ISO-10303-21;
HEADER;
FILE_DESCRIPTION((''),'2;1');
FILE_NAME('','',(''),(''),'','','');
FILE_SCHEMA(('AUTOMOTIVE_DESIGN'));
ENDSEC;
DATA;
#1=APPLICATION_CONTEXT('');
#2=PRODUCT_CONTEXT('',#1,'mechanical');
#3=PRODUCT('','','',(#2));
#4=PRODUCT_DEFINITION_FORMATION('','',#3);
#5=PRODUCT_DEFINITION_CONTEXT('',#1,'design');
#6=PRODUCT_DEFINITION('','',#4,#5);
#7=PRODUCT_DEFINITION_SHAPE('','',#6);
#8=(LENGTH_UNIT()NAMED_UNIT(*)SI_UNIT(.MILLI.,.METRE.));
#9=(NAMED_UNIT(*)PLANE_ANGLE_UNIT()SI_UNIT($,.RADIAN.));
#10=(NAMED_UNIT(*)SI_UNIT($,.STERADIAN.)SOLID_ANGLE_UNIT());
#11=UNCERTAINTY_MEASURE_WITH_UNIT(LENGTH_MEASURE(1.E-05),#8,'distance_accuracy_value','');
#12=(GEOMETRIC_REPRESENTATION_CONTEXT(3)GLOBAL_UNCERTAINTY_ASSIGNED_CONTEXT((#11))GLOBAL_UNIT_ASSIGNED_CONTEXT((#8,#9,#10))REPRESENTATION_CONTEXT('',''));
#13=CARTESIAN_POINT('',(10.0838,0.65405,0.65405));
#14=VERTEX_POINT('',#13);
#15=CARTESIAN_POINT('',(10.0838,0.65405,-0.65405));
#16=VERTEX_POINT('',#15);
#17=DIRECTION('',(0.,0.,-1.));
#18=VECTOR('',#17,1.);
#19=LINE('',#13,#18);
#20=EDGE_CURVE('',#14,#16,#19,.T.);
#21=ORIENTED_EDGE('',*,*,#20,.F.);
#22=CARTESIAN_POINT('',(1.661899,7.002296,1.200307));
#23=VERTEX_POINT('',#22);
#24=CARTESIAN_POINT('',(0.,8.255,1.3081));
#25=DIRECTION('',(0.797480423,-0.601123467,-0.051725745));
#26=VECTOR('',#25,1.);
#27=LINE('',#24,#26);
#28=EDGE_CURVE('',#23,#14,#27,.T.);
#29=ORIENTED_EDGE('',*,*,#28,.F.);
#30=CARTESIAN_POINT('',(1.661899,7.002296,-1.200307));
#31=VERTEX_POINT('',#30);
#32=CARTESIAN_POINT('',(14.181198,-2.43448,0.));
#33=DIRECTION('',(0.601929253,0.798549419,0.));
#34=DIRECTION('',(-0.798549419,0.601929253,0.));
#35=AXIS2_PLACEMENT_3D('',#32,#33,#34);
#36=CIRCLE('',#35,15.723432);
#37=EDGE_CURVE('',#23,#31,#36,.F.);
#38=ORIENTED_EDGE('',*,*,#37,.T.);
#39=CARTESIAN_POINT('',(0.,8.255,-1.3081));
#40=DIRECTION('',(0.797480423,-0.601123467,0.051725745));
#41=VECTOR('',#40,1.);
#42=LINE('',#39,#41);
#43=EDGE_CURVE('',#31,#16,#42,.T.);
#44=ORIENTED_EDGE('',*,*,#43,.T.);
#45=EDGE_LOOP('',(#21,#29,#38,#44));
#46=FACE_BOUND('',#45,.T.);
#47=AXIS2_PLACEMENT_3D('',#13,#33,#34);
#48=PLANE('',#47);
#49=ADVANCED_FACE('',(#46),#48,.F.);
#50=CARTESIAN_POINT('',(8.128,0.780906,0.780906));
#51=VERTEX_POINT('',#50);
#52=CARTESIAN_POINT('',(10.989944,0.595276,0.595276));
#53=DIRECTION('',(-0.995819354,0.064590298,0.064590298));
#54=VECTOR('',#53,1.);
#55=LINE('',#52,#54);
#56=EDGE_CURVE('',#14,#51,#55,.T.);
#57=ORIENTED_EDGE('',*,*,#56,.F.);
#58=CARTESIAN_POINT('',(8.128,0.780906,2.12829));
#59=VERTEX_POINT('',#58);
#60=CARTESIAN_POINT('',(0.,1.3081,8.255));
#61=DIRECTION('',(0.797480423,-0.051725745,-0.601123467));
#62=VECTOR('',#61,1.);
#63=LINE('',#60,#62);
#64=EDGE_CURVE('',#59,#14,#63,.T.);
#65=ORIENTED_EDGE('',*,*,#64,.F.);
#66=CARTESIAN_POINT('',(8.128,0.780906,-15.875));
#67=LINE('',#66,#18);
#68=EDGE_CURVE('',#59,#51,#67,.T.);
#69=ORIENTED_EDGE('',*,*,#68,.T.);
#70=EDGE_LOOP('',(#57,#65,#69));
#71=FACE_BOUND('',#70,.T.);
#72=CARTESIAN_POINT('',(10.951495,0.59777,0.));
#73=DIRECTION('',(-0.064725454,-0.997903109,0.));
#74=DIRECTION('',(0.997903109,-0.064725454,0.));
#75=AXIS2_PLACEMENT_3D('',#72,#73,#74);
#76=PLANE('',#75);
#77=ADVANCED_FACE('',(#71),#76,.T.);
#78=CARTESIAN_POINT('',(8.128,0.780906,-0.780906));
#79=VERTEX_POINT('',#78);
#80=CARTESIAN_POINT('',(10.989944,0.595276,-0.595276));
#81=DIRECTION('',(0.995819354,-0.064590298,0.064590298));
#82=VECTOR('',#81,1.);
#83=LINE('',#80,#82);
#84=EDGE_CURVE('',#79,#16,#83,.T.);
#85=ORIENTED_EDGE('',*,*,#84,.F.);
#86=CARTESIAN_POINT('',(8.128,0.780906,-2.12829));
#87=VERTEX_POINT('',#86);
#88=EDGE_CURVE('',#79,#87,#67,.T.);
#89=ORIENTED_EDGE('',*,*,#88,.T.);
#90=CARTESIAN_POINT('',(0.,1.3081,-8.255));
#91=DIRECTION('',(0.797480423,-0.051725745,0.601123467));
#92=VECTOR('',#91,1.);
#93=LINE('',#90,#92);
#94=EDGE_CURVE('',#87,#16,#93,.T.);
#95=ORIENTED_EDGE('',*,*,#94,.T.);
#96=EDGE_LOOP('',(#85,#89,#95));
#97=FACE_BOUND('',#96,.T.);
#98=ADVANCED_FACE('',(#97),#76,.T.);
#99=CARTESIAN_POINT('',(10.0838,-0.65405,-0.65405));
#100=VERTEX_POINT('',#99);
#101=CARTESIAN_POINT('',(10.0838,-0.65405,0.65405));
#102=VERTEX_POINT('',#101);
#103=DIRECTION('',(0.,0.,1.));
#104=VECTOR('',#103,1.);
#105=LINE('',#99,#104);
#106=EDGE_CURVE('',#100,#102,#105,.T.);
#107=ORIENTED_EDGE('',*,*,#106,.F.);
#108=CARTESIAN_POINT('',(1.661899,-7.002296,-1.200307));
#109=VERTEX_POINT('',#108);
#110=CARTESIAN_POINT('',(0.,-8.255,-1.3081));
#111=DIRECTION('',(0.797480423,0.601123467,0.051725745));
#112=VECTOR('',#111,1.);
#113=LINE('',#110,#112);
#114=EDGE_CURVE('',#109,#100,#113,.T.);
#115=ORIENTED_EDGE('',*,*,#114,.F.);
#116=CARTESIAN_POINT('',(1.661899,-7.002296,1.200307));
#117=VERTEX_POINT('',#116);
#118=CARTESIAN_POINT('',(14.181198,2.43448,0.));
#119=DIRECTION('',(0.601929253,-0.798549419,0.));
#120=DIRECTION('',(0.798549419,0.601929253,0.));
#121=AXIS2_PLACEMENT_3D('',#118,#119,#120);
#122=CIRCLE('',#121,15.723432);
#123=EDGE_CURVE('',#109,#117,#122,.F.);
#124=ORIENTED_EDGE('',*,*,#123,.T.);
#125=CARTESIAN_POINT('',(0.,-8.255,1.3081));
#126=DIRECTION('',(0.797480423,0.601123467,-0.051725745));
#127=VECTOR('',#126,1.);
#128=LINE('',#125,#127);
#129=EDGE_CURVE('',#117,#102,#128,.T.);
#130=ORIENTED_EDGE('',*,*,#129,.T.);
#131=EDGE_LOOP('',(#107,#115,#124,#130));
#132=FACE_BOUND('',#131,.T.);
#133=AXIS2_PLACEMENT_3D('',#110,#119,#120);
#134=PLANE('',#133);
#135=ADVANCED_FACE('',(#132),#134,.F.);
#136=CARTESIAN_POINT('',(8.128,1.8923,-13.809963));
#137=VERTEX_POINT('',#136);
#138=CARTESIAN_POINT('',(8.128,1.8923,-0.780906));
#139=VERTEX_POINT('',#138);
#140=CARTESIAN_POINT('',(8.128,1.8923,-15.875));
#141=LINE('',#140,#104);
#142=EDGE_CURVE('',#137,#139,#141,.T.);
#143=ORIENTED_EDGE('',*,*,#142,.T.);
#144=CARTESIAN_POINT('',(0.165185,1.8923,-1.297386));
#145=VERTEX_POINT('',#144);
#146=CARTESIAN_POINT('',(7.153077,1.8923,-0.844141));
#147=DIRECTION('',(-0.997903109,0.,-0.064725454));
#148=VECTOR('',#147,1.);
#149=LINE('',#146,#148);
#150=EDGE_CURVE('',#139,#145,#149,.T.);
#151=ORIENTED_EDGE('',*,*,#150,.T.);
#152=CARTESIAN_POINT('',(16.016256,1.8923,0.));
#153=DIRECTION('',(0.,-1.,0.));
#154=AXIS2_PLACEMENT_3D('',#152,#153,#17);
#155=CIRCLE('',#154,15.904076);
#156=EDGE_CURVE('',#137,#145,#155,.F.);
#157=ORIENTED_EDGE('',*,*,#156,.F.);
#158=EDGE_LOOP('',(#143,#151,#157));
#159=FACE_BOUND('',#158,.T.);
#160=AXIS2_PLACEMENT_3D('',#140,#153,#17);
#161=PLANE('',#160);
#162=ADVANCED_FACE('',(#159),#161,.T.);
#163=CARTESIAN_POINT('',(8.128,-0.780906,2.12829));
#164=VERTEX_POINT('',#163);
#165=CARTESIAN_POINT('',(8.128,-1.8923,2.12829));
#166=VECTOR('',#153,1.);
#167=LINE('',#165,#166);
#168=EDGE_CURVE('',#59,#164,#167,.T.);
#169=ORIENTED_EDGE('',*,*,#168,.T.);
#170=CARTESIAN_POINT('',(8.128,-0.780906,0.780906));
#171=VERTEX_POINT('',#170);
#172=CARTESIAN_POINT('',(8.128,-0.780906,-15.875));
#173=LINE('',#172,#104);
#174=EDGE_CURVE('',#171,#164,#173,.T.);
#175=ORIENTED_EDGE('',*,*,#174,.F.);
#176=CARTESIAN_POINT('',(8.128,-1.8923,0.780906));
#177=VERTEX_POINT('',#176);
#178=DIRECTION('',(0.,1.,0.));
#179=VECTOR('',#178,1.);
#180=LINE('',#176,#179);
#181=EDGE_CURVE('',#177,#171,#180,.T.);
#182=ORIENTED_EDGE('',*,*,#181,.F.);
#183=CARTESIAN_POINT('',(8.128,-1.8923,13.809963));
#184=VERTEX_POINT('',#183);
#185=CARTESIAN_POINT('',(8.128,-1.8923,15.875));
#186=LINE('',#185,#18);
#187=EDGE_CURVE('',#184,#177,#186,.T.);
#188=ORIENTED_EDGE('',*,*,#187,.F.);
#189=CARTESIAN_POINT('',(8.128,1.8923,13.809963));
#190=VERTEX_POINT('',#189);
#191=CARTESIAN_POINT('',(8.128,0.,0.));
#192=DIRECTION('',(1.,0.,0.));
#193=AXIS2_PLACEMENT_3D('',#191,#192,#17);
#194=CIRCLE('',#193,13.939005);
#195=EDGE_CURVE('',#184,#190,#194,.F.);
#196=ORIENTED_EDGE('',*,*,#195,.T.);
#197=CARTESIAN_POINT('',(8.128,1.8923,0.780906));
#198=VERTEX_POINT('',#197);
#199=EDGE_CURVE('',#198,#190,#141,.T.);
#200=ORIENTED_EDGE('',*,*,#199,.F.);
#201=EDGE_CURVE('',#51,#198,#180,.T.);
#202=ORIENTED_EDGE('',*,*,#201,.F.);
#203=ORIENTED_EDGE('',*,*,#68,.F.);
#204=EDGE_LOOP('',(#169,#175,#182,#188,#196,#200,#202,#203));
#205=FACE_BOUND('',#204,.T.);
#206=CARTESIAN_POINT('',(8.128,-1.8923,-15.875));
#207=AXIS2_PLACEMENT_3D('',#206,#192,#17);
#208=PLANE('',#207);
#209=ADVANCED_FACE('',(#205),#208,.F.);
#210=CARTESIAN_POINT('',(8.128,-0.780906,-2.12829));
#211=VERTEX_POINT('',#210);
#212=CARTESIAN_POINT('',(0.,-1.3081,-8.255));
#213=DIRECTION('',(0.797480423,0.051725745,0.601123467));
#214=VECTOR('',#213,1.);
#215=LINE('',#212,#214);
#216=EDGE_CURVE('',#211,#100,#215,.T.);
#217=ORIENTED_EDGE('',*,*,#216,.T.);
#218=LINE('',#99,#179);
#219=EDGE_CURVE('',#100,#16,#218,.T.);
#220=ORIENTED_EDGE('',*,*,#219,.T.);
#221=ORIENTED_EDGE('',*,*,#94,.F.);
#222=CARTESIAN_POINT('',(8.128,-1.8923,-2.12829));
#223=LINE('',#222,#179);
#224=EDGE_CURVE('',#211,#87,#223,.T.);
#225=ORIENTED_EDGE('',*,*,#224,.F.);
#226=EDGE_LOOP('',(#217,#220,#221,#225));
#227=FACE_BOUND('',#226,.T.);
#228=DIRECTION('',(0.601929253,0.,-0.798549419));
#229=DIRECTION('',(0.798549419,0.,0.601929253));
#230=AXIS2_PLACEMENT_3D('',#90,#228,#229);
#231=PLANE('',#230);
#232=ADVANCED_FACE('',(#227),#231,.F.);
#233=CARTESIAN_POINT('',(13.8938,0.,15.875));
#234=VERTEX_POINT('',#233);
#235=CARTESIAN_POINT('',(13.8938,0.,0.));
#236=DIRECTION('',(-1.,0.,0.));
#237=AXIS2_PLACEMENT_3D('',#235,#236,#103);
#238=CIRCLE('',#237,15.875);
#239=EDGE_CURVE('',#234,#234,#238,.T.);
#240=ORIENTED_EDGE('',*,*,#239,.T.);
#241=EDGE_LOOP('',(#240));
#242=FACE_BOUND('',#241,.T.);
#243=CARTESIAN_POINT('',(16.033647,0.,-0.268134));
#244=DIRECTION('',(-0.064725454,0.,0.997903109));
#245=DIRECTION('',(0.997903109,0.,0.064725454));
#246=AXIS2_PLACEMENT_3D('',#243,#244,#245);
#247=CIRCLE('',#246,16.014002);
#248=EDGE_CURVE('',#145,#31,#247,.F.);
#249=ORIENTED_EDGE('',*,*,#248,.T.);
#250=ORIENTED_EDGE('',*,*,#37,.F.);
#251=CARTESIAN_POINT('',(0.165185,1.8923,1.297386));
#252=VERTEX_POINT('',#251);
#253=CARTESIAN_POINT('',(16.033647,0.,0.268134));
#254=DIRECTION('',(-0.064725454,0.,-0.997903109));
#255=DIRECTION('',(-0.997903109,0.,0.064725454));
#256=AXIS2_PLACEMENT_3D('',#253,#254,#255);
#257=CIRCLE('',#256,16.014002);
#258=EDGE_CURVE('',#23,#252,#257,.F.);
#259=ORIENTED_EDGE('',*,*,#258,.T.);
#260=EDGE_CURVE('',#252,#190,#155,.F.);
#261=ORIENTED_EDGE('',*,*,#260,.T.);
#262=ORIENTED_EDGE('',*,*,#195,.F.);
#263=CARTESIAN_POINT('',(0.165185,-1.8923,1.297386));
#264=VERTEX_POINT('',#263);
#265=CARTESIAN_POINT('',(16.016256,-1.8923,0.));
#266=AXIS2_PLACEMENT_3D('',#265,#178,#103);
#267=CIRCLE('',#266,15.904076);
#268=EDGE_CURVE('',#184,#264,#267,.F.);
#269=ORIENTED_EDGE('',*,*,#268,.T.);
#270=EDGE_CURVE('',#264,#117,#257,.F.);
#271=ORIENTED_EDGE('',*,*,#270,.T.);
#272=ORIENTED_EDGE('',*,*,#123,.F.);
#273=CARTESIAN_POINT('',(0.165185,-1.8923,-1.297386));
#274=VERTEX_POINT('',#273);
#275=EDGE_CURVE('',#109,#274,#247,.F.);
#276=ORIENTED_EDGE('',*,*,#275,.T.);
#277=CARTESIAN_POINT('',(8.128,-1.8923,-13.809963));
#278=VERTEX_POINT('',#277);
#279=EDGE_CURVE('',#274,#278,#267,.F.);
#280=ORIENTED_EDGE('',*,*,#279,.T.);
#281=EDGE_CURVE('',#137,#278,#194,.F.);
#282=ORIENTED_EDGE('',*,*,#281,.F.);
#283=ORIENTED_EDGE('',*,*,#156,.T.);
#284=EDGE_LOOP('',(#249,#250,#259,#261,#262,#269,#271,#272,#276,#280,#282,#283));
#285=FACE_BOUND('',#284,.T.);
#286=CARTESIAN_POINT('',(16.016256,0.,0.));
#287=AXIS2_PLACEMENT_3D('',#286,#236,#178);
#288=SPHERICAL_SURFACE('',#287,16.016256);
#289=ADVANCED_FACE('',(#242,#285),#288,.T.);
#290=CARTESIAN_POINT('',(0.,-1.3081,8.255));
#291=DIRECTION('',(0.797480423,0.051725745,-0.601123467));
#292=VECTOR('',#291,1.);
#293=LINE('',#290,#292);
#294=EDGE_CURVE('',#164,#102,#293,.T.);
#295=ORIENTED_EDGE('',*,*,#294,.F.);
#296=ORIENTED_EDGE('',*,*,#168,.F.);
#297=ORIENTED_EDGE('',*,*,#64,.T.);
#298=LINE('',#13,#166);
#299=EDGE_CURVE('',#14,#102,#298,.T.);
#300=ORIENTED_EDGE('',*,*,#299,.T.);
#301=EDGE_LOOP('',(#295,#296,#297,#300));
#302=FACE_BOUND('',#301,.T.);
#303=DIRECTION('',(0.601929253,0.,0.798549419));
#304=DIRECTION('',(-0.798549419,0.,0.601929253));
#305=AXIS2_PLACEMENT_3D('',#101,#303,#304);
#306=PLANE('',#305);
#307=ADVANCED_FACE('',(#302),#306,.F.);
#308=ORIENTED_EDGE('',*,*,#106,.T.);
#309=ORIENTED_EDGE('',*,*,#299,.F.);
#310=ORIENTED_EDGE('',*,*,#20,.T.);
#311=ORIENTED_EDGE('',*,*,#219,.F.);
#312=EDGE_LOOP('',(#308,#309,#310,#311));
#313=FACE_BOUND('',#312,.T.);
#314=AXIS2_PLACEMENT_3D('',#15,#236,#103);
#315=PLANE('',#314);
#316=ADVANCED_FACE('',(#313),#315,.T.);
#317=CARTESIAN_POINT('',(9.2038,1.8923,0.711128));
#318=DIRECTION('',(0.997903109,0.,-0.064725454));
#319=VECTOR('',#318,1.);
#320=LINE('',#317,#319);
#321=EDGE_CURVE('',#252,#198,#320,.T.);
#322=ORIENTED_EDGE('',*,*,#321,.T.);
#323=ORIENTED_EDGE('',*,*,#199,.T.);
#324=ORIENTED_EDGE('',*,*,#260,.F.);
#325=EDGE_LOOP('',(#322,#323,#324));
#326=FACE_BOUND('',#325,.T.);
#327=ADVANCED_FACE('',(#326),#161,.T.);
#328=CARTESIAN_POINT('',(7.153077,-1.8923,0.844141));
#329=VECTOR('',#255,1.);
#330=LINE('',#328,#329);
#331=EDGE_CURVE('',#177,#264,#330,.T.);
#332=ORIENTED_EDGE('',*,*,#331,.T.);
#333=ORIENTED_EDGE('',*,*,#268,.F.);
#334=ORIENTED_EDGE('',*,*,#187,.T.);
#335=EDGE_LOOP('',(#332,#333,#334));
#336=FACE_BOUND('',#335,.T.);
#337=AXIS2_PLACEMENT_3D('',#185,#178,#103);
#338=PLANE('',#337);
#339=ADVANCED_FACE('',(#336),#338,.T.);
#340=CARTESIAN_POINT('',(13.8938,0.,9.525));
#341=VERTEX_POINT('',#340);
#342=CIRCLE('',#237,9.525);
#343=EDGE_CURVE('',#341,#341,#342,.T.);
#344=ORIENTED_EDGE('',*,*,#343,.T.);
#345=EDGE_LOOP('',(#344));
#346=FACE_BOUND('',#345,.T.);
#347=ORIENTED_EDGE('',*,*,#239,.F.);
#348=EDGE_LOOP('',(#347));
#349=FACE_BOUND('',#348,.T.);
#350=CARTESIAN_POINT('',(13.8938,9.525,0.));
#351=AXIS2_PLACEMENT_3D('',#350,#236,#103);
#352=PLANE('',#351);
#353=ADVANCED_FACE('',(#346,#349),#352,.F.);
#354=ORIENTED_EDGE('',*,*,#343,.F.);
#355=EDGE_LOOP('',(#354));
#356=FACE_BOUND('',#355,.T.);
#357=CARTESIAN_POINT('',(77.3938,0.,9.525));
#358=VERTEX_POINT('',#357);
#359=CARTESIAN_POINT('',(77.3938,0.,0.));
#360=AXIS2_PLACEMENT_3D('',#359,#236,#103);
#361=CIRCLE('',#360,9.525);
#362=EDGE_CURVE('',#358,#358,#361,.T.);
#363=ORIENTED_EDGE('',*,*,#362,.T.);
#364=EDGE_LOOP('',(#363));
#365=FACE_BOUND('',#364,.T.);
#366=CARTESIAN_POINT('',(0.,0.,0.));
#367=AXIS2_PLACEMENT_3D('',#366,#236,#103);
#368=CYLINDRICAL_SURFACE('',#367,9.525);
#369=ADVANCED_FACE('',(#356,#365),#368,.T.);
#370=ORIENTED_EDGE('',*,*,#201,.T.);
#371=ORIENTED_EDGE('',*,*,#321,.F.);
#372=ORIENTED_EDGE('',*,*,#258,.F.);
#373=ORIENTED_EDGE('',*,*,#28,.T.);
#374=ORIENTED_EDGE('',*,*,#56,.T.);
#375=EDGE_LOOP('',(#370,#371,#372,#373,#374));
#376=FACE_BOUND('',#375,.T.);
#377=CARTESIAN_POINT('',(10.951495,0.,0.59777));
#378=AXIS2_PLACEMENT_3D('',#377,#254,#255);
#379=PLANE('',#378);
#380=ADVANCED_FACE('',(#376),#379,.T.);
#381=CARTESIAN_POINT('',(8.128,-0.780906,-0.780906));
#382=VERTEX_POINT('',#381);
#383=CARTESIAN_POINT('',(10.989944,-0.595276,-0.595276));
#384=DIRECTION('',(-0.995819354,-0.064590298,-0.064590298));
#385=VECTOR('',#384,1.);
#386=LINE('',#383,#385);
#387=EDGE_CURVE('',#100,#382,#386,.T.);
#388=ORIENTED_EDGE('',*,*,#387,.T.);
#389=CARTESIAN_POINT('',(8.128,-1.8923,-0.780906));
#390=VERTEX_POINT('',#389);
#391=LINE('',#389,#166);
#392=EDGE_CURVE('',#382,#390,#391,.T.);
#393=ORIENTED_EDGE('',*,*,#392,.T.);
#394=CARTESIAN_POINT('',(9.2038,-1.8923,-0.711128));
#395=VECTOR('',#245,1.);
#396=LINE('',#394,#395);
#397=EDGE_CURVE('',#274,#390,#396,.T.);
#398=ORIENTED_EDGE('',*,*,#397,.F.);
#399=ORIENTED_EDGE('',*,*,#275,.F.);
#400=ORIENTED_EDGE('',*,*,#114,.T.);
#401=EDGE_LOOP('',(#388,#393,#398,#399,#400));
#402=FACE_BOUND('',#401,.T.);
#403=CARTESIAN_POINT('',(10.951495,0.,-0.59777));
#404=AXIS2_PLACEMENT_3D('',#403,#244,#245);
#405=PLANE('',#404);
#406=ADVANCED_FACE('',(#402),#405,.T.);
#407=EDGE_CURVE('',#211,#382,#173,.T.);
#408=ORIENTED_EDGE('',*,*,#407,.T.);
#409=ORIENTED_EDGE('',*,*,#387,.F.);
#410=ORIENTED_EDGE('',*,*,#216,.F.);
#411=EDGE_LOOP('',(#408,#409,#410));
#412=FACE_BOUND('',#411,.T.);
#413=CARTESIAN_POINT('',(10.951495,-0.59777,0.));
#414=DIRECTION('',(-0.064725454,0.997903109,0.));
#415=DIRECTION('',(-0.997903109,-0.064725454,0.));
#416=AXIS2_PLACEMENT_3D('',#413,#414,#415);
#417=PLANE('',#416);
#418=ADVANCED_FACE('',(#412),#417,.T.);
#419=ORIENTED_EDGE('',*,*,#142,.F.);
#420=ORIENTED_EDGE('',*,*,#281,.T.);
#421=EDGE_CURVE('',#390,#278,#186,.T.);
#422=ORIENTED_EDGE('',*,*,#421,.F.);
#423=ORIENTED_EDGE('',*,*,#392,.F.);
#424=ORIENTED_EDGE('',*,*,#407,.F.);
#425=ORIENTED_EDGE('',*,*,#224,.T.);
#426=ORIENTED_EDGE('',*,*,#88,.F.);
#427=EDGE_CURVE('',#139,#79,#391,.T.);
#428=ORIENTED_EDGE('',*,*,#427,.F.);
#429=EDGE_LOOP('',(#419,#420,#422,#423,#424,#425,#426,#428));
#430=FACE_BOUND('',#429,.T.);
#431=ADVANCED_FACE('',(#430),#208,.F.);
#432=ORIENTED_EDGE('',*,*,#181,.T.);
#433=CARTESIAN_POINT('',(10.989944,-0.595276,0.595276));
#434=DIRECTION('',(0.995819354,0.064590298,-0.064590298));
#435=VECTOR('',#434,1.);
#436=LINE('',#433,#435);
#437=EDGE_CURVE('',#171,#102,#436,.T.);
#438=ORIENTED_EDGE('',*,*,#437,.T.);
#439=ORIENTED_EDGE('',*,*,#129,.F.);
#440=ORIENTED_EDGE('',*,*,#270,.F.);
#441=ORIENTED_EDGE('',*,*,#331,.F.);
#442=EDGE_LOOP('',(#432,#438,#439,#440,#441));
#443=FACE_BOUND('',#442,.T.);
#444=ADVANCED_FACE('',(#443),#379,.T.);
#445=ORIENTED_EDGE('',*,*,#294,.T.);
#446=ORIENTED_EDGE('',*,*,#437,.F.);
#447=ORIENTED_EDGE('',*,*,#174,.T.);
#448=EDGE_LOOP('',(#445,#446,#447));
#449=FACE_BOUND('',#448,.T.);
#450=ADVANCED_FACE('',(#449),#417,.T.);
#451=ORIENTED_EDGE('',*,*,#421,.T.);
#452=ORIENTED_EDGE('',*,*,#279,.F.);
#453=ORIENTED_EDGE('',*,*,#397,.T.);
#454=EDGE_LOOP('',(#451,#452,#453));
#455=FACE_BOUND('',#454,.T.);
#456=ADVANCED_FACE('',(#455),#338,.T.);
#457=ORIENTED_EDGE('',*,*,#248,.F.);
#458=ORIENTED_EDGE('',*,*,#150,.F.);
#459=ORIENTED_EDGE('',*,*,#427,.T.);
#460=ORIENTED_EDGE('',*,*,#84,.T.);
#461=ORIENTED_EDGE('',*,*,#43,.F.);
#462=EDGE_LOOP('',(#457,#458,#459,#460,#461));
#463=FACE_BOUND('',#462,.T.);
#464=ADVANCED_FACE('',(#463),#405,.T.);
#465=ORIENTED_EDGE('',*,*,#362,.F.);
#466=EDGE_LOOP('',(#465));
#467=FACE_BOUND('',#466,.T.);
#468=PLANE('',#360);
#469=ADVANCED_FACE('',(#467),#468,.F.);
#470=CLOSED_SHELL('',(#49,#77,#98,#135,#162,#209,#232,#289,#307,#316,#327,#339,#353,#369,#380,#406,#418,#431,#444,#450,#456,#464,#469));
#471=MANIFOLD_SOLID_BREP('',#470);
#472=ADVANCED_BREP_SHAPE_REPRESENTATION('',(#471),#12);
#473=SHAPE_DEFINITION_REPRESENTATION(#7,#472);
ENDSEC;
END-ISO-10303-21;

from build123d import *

# Parameters (mm, degrees)
SKETCH2_W         = 31.75
SKETCH2_H         = 3.7846
SLOT_DEPTH        = 8.128
CIRPATTERN1_COUNT = 2
CIRPATTERN1_ANGLE = 90


# Read off the part's stored shape, not the designer's step: ThreadSchematic
with BuildPart() as part:
    # ThreadSchematic outline → ThreadSchematic (revolve)
    with BuildSketch(Plane.YX):
        with BuildLine():
            Line((0, 77.3938), (0, 0))
            ThreePointArc((0, 0), (10.548143245, 3.963989534), (15.875000001, 13.893800008))
            Line((15.875000001, 13.893800008), (9.525, 13.8938))
            Line((9.525, 13.8938), (9.525, 77.3938))
            Line((9.525, 77.3938), (0, 77.3938))
        make_face()
    revolve(axis=Axis((0, 0, 0), (1, 0, 0)))

    # Sketch2 → Slot (cut)
    with BuildSketch(Plane(origin=(0, 0, 0), x_dir=(0, 0, -1), z_dir=(1, 0, 0))):
        Rectangle(SKETCH2_W, SKETCH2_H)
    extrude(amount=SLOT_DEPTH, mode=Mode.SUBTRACT)

    # Sketch3 → Cross section 0
    with BuildSketch(Plane(origin=(0, 0, 0), x_dir=(0, 0, -1), z_dir=(1, 0, 0))):
        with BuildLine():
            Line((1.3081, -8.255), (-1.3081, -8.255))
            Line((-1.3081, -8.255), (-1.3081, 8.255))
            Line((-1.3081, 8.255), (1.3081, 8.255))
            Line((1.3081, 8.255), (1.3081, -8.255))
        make_face()
    # Sketch4 → Cross section 1
    with BuildSketch(Plane(origin=(10.0838, 0, 0), x_dir=(0, 0, -1), z_dir=(1, 0, 0))):
        with BuildLine():
            Line((0.65405, -0.65405), (-0.65405, -0.65405))
            Line((-0.65405, -0.65405), (-0.65405, 0.65405))
            Line((-0.65405, 0.65405), (0.65405, 0.65405))
            Line((0.65405, 0.65405), (0.65405, -0.65405))
        make_face()
    cross = loft(mode=Mode.SUBTRACT)

    # CirPattern1: Cross ×2 about axis
    cirpattern1_axis = Axis((0, 0, 0), (1, 0, 0))
    for i in range(1, CIRPATTERN1_COUNT):
        add(cross.rotate(cirpattern1_axis, i * CIRPATTERN1_ANGLE / (CIRPATTERN1_COUNT - 1)), mode=Mode.SUBTRACT)


solid = part.part
